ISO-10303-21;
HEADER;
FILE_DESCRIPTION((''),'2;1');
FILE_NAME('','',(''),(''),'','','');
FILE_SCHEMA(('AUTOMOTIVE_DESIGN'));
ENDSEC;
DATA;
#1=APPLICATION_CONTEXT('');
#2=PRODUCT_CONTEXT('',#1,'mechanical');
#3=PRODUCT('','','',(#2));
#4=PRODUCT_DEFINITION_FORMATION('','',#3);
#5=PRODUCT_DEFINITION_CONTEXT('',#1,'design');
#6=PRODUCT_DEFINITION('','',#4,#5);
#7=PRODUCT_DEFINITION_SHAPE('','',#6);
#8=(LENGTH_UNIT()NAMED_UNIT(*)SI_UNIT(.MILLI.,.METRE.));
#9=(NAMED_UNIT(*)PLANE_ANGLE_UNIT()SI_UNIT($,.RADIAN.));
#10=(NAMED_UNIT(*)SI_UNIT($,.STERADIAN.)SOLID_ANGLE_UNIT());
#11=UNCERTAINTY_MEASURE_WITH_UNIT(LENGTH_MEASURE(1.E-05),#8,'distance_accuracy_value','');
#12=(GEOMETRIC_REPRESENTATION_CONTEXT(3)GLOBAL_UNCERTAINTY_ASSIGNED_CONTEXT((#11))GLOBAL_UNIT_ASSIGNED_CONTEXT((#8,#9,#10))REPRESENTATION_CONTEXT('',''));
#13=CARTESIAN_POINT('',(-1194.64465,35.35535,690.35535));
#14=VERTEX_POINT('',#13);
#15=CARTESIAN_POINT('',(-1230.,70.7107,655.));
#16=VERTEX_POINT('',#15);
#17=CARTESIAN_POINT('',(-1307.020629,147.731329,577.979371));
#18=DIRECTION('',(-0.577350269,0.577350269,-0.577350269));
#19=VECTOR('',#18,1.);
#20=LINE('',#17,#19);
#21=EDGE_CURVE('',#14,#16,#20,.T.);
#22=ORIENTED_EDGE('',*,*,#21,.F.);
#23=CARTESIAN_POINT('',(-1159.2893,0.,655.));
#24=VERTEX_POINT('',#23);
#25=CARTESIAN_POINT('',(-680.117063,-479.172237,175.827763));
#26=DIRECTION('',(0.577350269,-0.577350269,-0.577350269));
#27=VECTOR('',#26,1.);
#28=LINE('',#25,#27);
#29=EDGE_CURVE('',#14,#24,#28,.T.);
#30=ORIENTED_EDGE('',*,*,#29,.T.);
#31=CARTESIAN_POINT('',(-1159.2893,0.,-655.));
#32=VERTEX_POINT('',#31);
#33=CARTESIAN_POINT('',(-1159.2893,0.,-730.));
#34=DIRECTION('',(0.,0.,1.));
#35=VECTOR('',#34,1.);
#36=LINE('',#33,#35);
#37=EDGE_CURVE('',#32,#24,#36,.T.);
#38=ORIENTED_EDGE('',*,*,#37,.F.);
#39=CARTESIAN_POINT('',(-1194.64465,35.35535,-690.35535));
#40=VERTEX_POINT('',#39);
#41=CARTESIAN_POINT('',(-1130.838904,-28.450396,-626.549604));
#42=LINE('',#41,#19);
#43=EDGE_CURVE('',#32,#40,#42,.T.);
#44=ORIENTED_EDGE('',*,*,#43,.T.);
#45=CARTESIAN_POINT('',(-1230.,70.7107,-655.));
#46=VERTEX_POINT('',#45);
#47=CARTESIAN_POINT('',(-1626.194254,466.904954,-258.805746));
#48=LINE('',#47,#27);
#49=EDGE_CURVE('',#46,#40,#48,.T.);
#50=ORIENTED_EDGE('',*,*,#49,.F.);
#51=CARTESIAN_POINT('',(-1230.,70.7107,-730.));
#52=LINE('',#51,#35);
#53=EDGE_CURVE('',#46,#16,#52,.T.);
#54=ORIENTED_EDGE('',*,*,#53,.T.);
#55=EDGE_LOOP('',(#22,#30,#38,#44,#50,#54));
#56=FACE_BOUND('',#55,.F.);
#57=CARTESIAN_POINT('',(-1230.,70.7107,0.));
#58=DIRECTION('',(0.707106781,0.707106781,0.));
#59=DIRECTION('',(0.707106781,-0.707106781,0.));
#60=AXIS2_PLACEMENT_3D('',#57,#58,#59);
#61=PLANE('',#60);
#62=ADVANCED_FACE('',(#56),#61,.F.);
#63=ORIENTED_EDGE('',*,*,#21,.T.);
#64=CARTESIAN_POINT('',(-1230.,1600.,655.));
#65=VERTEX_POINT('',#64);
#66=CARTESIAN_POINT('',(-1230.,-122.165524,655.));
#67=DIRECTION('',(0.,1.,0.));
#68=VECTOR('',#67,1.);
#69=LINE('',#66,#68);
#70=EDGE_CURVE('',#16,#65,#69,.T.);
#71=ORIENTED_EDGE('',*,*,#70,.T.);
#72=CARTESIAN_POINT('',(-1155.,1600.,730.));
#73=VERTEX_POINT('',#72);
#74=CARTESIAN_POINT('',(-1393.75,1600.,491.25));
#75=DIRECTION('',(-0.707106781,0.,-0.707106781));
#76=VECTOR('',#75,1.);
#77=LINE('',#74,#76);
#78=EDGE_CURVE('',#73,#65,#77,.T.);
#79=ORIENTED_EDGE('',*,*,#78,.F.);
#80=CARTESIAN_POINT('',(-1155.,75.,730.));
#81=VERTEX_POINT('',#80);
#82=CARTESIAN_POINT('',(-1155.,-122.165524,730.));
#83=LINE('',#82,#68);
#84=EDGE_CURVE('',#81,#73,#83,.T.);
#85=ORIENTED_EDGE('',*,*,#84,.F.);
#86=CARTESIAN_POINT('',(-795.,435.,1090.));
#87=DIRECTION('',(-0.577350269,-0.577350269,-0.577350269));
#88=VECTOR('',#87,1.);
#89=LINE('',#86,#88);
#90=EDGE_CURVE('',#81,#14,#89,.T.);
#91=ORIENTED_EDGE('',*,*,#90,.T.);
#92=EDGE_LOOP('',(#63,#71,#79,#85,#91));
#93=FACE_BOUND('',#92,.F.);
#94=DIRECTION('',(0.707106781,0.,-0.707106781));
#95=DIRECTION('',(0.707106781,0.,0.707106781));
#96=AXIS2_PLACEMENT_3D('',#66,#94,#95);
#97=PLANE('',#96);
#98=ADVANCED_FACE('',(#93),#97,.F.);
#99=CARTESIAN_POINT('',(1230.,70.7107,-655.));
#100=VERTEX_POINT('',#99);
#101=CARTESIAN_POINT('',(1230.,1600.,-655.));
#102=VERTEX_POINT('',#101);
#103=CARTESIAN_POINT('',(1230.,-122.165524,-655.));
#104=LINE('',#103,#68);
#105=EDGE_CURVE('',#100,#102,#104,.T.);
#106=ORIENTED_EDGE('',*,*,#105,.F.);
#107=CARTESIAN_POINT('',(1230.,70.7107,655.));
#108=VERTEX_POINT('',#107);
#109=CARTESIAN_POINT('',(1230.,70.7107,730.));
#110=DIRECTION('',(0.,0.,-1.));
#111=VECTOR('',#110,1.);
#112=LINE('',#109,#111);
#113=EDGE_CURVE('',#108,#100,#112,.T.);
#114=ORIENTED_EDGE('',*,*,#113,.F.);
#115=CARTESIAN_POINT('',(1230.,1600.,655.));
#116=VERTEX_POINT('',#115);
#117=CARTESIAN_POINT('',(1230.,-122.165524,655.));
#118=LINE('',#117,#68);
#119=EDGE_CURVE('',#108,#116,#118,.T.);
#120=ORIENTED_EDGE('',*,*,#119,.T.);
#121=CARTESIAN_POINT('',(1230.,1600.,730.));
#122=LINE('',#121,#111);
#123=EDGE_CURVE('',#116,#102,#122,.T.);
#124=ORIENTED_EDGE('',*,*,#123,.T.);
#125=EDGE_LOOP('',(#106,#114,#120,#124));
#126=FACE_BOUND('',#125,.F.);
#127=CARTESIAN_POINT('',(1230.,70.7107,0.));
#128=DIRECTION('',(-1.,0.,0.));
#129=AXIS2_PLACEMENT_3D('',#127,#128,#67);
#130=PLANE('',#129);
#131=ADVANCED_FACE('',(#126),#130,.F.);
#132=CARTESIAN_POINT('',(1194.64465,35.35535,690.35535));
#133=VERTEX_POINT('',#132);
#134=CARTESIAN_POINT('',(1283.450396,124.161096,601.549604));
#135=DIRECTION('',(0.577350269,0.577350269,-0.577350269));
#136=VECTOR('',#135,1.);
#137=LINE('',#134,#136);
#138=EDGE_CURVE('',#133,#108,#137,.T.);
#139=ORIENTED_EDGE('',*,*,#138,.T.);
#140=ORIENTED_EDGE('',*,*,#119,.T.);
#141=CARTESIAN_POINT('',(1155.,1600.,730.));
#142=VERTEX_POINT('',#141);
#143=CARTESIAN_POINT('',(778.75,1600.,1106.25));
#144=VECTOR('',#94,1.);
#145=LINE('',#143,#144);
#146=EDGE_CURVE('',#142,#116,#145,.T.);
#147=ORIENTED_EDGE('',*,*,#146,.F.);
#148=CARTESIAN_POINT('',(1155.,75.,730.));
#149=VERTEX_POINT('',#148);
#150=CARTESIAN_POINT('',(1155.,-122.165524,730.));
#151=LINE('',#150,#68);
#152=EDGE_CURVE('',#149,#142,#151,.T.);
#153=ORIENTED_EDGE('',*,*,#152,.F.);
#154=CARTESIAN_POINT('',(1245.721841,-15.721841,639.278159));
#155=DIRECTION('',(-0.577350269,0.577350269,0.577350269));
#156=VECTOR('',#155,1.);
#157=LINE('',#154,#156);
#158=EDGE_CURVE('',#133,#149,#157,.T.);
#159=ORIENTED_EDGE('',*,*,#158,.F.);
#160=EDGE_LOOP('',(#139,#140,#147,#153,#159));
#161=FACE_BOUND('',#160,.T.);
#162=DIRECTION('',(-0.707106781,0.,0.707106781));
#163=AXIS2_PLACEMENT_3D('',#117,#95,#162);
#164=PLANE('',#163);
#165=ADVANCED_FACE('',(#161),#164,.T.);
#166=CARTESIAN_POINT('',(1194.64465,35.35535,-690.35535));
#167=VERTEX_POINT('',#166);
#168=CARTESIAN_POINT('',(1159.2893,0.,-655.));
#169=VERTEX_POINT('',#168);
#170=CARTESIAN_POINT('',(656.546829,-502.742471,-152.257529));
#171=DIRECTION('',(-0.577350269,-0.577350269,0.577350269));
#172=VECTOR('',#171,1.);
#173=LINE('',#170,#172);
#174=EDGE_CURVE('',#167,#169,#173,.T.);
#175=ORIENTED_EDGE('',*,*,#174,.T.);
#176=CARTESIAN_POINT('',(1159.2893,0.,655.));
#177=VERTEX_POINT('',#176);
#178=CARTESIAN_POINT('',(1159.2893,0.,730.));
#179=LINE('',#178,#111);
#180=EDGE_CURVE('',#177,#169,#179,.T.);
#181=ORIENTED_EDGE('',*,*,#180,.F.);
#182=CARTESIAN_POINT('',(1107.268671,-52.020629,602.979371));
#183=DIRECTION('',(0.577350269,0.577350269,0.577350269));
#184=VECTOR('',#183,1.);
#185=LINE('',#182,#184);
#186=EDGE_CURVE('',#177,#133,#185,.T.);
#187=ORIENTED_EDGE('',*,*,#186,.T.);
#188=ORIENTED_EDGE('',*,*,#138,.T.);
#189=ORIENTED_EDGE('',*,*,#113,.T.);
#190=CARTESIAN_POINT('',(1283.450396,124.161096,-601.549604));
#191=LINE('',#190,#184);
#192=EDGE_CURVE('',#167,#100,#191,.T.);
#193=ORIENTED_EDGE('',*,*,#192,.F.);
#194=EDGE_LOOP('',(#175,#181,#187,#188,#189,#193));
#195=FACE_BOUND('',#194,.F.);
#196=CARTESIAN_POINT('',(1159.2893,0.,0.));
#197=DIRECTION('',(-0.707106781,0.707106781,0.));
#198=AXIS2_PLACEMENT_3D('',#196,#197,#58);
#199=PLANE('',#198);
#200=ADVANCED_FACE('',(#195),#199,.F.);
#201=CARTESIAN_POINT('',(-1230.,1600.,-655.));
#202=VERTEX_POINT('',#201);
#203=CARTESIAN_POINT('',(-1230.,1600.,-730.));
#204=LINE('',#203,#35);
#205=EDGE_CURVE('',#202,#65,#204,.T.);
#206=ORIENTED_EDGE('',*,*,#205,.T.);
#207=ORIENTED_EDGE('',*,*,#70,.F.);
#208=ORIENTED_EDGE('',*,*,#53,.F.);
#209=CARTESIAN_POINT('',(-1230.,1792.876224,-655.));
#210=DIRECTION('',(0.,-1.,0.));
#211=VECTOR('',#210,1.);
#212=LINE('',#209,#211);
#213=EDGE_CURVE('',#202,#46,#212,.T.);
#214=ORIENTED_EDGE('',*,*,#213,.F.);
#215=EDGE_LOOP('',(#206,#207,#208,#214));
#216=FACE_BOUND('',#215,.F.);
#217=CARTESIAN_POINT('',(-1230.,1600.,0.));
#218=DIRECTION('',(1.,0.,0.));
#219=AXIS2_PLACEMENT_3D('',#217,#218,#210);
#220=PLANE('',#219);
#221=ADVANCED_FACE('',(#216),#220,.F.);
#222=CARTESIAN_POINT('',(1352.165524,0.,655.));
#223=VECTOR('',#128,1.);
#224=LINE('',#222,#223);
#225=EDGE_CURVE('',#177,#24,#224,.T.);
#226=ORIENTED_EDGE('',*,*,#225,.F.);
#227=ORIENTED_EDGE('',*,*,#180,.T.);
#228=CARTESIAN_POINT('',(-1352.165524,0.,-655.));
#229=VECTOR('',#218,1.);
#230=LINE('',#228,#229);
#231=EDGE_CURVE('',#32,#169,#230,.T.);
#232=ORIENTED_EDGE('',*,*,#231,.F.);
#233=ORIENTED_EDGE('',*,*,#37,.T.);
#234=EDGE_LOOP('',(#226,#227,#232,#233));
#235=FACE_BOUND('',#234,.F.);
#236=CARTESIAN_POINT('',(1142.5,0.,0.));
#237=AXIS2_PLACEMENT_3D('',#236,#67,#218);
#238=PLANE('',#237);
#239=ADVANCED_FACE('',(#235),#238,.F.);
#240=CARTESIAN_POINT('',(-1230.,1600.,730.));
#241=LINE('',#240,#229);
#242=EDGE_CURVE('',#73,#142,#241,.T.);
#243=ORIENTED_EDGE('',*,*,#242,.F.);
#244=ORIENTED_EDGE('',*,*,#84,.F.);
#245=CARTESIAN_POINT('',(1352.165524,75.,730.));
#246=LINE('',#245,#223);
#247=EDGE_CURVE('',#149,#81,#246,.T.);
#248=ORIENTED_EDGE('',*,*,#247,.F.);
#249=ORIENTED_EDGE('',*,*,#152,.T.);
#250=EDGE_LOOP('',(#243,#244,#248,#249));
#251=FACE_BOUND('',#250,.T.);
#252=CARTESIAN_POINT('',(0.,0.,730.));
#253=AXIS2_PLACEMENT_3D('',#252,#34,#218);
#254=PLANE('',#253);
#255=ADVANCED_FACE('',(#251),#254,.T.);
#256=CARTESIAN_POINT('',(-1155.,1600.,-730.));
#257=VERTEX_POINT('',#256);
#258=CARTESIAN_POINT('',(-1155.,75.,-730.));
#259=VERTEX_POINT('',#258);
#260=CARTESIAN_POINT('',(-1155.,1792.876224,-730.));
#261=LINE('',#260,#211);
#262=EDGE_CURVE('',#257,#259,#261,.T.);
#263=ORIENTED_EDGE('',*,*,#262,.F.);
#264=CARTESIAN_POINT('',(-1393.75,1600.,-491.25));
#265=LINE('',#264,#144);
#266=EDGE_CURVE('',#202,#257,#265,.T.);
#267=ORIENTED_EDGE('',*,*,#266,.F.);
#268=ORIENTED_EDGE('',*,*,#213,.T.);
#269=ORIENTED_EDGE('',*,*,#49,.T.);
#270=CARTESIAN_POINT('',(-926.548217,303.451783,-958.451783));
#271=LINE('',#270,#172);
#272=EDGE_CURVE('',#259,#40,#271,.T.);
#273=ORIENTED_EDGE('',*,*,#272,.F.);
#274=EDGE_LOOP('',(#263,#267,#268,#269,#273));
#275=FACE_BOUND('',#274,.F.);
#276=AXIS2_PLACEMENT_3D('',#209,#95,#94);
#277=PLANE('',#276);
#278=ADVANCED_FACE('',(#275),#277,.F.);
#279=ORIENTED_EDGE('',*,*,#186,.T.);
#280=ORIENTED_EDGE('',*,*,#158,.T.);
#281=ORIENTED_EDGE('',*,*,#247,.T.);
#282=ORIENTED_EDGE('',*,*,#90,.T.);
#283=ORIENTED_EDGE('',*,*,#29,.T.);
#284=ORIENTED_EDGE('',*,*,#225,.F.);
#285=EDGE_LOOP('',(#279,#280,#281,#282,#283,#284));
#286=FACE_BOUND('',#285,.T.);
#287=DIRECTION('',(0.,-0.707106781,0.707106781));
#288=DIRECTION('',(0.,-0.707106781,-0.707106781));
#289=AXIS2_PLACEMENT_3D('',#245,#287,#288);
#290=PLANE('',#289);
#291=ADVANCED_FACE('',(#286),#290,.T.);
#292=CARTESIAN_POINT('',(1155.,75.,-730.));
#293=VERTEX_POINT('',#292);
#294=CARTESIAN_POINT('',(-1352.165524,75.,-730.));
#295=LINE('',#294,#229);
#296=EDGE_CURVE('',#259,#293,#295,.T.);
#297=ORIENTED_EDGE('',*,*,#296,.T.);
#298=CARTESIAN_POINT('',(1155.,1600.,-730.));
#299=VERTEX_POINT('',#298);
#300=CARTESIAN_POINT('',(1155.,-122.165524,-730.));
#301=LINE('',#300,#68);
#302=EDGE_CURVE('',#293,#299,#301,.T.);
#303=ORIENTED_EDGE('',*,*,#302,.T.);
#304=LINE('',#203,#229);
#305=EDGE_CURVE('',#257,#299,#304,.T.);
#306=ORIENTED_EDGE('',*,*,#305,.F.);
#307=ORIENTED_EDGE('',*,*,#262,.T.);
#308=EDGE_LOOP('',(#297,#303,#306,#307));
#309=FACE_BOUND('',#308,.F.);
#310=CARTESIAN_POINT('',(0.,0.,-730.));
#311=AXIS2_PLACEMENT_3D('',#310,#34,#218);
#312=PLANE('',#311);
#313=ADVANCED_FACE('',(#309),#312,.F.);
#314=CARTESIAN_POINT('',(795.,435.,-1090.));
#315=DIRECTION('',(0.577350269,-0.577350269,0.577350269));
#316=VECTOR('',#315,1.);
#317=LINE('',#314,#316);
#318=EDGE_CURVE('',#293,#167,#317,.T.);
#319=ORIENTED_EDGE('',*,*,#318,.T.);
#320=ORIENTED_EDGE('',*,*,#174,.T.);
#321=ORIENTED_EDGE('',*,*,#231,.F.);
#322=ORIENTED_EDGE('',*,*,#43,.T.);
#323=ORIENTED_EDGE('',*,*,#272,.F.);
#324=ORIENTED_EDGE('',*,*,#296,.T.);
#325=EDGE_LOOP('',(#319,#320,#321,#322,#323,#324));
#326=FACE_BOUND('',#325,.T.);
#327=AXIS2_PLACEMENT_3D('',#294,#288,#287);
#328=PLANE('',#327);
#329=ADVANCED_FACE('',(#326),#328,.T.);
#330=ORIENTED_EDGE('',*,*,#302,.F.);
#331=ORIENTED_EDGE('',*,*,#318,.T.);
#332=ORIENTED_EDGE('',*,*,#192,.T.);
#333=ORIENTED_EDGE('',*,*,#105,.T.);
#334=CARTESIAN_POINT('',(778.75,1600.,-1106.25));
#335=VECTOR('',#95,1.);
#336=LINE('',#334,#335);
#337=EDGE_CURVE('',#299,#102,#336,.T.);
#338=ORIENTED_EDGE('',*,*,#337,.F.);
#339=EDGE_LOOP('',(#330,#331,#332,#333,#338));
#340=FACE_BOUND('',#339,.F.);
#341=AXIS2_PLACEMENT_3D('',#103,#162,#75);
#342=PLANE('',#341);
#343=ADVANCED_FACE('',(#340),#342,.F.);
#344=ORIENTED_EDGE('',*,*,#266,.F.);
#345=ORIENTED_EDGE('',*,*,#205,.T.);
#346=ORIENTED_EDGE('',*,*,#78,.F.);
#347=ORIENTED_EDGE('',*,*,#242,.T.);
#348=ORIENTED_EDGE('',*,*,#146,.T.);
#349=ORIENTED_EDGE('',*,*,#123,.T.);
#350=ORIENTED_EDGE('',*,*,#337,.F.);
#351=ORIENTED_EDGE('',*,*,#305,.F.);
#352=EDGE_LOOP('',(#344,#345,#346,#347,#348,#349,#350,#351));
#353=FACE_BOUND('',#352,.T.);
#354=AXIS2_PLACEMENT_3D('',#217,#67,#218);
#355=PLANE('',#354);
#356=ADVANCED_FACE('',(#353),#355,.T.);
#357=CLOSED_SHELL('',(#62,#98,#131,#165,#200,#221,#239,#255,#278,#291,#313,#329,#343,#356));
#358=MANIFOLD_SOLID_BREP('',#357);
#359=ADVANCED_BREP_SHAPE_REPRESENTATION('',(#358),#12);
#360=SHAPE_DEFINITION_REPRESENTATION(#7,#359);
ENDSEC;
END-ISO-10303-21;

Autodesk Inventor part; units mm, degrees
ref_plane "YZ Plane" through (0, 0, 0) normal (1, 0, 0) x (0, 1, 0)
ref_plane "XZ Plane" through (0, 0, 0) normal (0, 1, 0) x (-1, 0, 0)
ref_plane "XY Plane" through (0, 0, 0) normal (0, 0, 1) x (1, 0, 0)
sketch "Sketch18" plane through (0, 0, 0) normal (0, 0, 1) x (1, 0, 0)
  circle A0 centre (0, 1100) radius 213
  line L0 (0, 0) -> (0, 1100) construction
  line L1 (0, 1100) -> (0, 1600) construction
  line L2 (0, 1100) -> (-158.3548, 850) construction
  line L3 (-158.3548, 850) -> (-454.2876, 850) construction
  line L4 (-454.2876, 850) -> (-612.6424, 1100) construction
  line L5 (-612.6424, 1100) -> (0, 1100) construction
  line L6 (-1230, 1600) -> (1230, 1600)
  line L7 (1541.1151, -621.787) -> (-1872.5331, -621.787) construction
  line L8 (-1230, 1600) -> (-1230, 265.165)
  line L9 (-1230, 265.165) -> (-964.835, 0)
  line L10 (-964.835, 0) -> (1159.2893, 0)
  line L11 (1159.2893, 0) -> (1230, 70.7107)
  line L12 (1230, 70.7107) -> (1230, 1600)
  line L13 (-1468.3883, 141.4214) -> (-1468.3883, -183.5786)
  line L14 (-1468.3883, 198.9214) -> (-1496.3883, 198.9214)
  line L15 (-1496.3883, 198.9214) -> (-1496.3883, -241.0786)
  line L16 (-1496.3883, -241.0786) -> (-1468.3883, -241.0786)
  line L17 (-1468.3883, -241.0786) -> (-1468.3883, 198.9214)
  line L18 (-1097.4175, 132.5825) -> (-1251.0786, -21.0786) construction
  line L19 (-1251.0786, -21.0786) -> (-1468.3883, -21.0786) construction
  line L20 (-1468.3883, 141.4214) -> (-1318.3883, 141.4214)
  line L21 (-1318.3883, 141.4214) -> (-1212.3223, 247.4874)
  line L22 (-1468.3883, -183.5786) -> (-1183.7689, -183.5786)
  line L23 (-1183.7689, -183.5786) -> (-982.5126, 17.6777)
  line L24 (-1318.3883, 141.4214) -> (-1183.7689, -183.5786)
  line L25 (1313.2107, -113.2107) -> (1341.2107, -113.2107)
  line L26 (1341.2107, -113.2107) -> (1341.2107, -553.2107)
  line L27 (1341.2107, -553.2107) -> (1313.2107, -553.2107)
  line L28 (1313.2107, -553.2107) -> (1313.2107, -113.2107)
  line L29 (980, 0) -> (980, -135.3553) construction
  line L30 (980, -135.3553) -> (1177.8553, -333.2107) construction
  line L31 (1177.8553, -333.2107) -> (1313.2107, -333.2107) construction
  line L32 (1313.2107, -170.7107) -> (1213.2107, -170.7107)
  line L33 (1213.2107, -170.7107) -> (1142.5, -100)
  line L34 (1142.5, -100) -> (1142.5, 0)
  line L35 (1313.2107, -495.7107) -> (1142.5, -495.7107)
  line L36 (1142.5, -495.7107) -> (817.5, -170.7107)
  line L37 (817.5, -170.7107) -> (817.5, 0)
  line L38 (1142.5, -100) -> (817.5, -170.7107)
  line L39 (1213.2107, -170.7107) -> (1142.5, -495.7107)
  line L40 (1177.8553, -135.3553) -> (980, -333.2107) construction
  line L41 (1142.5, -50) -> (817.5, -50) construction
  line L42 (-764.544, 0) -> (-593.6658, 0)
  line L43 (28, 0) -> (23.8247, 0)
  line L44 (28, -50) -> (28, 0)
  line L45 (28, -50) -> (-28, -50)
  line L46 (-28, -50) -> (-28, -22)
  line L47 (-28, -22) -> (0, -22)
  line L48 (0, -22) -> (0, 0)
  line L49 (0, -22) -> (28, -22) construction
  line L50 (-33.8617, -50) -> (33.8617, -50)
  line L51 (33.8617, -50) -> (33.8617, -60)
  line L52 (33.8617, -60) -> (-33.8617, -60)
  line L53 (-33.8617, -60) -> (-33.8617, -50)
  line L54 (-37.5, -60) -> (37.5, -60)
  line L55 (37.5, -60) -> (37.5, -200)
  line L56 (37.5, -200) -> (-37.5, -200)
  line L57 (-37.5, -200) -> (-37.5, -60)
  line L58 (378, 0) -> (373.8247, 0)
  line L59 (350, -22) -> (350, 0)
  line L60 (322, -22) -> (350, -22)
  line L61 (350, -22) -> (378, -22) construction
  line L62 (322, -50) -> (322, -22)
  line L63 (378, -50) -> (378, 0)
  line L64 (378, -50) -> (322, -50)
  line L65 (387.5, -60) -> (387.5, -200)
  line L66 (383.8617, -50) -> (383.8617, -60)
  line L67 (312.5, -200) -> (312.5, -60)
  line L68 (387.5, -200) -> (312.5, -200)
  line L69 (316.1383, -50) -> (383.8617, -50)
  line L70 (383.8617, -60) -> (316.1383, -60)
  line L71 (312.5, -60) -> (387.5, -60)
  line L72 (316.1383, -60) -> (316.1383, -50)
  line L73 (-322, 0) -> (-326.1753, 0)
  line L74 (-350, -22) -> (-350, 0)
  line L75 (-378, -22) -> (-350, -22)
  line L76 (-350, -22) -> (-322, -22) construction
  line L77 (-378, -50) -> (-378, -22)
  line L78 (-322, -50) -> (-322, 0)
  line L79 (-322, -50) -> (-378, -50)
  line L80 (-312.5, -60) -> (-312.5, -200)
  line L81 (-316.1383, -50) -> (-316.1383, -60)
  line L82 (-387.5, -200) -> (-387.5, -60)
  line L83 (-312.5, -200) -> (-387.5, -200)
  line L84 (-383.8617, -50) -> (-316.1383, -50)
  line L85 (-316.1383, -60) -> (-383.8617, -60)
  line L86 (-387.5, -60) -> (-312.5, -60)
  line L87 (-383.8617, -60) -> (-383.8617, -50)
  line L88 (728, 0) -> (723.8247, 0)
  line L89 (700, -22) -> (700, 0)
  line L90 (672, -22) -> (700, -22)
  line L91 (700, -22) -> (728, -22) construction
  line L92 (672, -50) -> (672, -22)
  line L93 (728, -50) -> (728, 0)
  line L94 (728, -50) -> (672, -50)
  line L95 (737.5, -60) -> (737.5, -200)
  line L96 (733.8617, -50) -> (733.8617, -60)
  line L97 (662.5, -200) -> (662.5, -60)
  line L98 (737.5, -200) -> (662.5, -200)
  line L99 (666.1383, -50) -> (733.8617, -50)
  line L100 (733.8617, -60) -> (666.1383, -60)
  line L101 (662.5, -60) -> (737.5, -60)
  line L102 (666.1383, -60) -> (666.1383, -50)
  line L103 (-672, 0) -> (-676.1753, 0)
  line L104 (-700, -22) -> (-700, 0)
  line L105 (-728, -22) -> (-700, -22)
  line L106 (-700, -22) -> (-672, -22) construction
  line L107 (-728, -50) -> (-728, -22)
  line L108 (-672, -50) -> (-672, 0)
  line L109 (-672, -50) -> (-728, -50)
  line L110 (-662.5, -60) -> (-662.5, -200)
  line L111 (-666.1383, -50) -> (-666.1383, -60)
  line L112 (-737.5, -200) -> (-737.5, -60)
  line L113 (-662.5, -200) -> (-737.5, -200)
  line L114 (-733.8617, -50) -> (-666.1383, -50)
  line L115 (-666.1383, -60) -> (-733.8617, -60)
  line L116 (-737.5, -60) -> (-662.5, -60)
  line L117 (-733.8617, -60) -> (-733.8617, -50)
  line L118 (-1230, 265.165) -> (-1230, 70.7107)
  line L119 (-1230, 70.7107) -> (-1159.2893, 0)
  line L120 (-1159.2893, 0) -> (-964.835, 0)
  line L121 (1980.1647, -124.622) -> (1655.1647, -124.622)
  line L122 (1655.1647, -124.622) -> (1655.1647, -361.6901)
  line L123 (2165.0175, -309.4748) -> (2165.0175, -634.4748)
  line L124 (1980.1647, -124.622) -> (1980.1647, -309.4748)
  line L125 (1980.1647, -309.4748) -> (2165.0175, -309.4748)
  line L126 (2022.5911, -267.0484) -> (1791.5571, -498.0824)
  line L127 (1980.1647, -224.622) -> (2065.0175, -309.4748)
  line L128 (1655.1647, -361.6901) -> (1927.9494, -634.4748)
  line L129 (1980.1647, -224.622) -> (1655.1647, -361.6901)
  line L130 (2065.0175, -309.4748) -> (1927.9494, -634.4748)
  line L131 (2165.0175, -634.4748) -> (1927.9494, -634.4748)
  point P0 (-306.3212, 850)
  point P1 (-306.3212, 1100)
  point P2 (0, -50)
  point P3 (0, -60)
  point P4 (350, 0)
  point P5 (350, -50)
  point P6 (350, -60)
  point P7 (-350, 0)
  point P8 (-350, -50)
  point P9 (-350, -60)
  point P10 (700, 0)
  point P11 (700, -50)
  point P12 (700, -60)
  point P13 (-700, 0)
  point P14 (-700, -50)
  point P15 (-700, -60)
  dimension "d112" = 426
  dimension "d113" = 1100
  dimension "d114" = 500
  dimension "d115" = 1100
  dimension "d116" = 250
  dimension "d120" = 2460
  dimension "d121" = 325
  dimension "d123" = 28
  dimension "d124" = 440
  dimension "d125" = 135
  dimension "d127" = 67.5
  dimension "d128" = 100
  dimension "d129" = 375
  dimension "d130" = 1600
  dimension "d131" = 150
  dimension "d132" = 250
  dimension "d133" = 100
  dimension "d135" = 50
  dimension "d136" = -28
  dimension "d137" = 10
  dimension "d138" = 140
  dimension "d139" = 75
  dimension "d142" = 350
  dimension "d157" = 217.3097
  dimension "d164" = 135.3553
  dimension "d165" = 279.8097
  dimension "d174" = 12.275
  dimension "d175" = 32.725
  dimension "d176" = 459.6194
  dimension "d177" = 279.8097
  dimension "d178" = 325
  dimension "d179" = 45
  dimension "d180" = 100
  dimension "d181" = 100
  dimension "d182" = 120
  dimension "d184" = 326.7315
  dimension "d185" = 22.867
  dimension "d186" = 22.133
extrude "Extrusion16" add sketch "Sketch18" along normal mid plane 1460 contours A0 | L6 L12 L11 L10 L9 L8 | L9 L21 L118 | L9 L23 L120 L119 L118 L21 | L9 L120 L23
sketch "Sketch19" plane through (-1230, 265.165, 700) normal (-1, 0, 0) x (0, 0, 1)
  circle A0 centre (-700, 834.835) radius 213
  line L0 (30, 1334.835) -> (30, -194.4544) construction
  line L1 (-1430, 1334.835) -> (30, 1334.835) construction
  line L2 (-1430, -194.4544) -> (-1430, 1334.835) construction
  line L3 (-1430, 1334.835) -> (30, 1334.835) projected
  line L4 (-1430, -194.4544) -> (30, -194.4544) projected
  point P0 (-700, -265.165)
  point P1 (-700, 1334.835)
  point P2 (-700, 1334.835)
  dimension "d149" = 500
  dimension "d150" = 426
extrude "Extrusion17" [suppressed]
sketch "Sketch20" plane through (0, 0, -730) normal (0, 0, -1) x (-1, 0, 0)
  circle A0 centre (0, 1100) radius 213
  line L0 (1230, 1600) -> (-1230, 1600) projected
  point P0 (0, 0)
  point P1 (0, 1600)
  point P2 (0, 1600)
  dimension "d153" = 500
  dimension "d154" = 426
extrude "Extrusion18" [suppressed]
sketch "Sketch23" plane through (0, 0, 0) normal (0, 0, 1) x (1, 0, 0)
  line L0 (1159.2893, 0) -> (1230, 70.7107) construction
  line L1 (1230, 70.7107) -> (1230, 1600) construction
  line L2 (1230, 1600) -> (-1230, 1600) construction
  line L3 (-1230, 1600) -> (-1230, 70.7107) construction
  line L4 (980, 0) -> (980, -135.3553)
  line L5 (980, -135.3553) -> (1177.8553, -333.2107)
  line L6 (1177.8553, -333.2107) -> (1313.2107, -333.2107)
  line L7 (-1159.2893, 0) -> (1159.2893, 0) projected
  line L8 (-1230, 70.7107) -> (-1159.2893, 0) projected
  point P0 (0, 0)
  dimension "d162" = 135
  dimension "d163" = 250
  dimension "d166" = 135.3553
  dimension "d167" = 279.8097
sketch "Sketch24" plane through (-1034.835, 0, 700) normal (0, -1, 0) x (1, 0, 0)
  circle A0 centre (2084.835, -700) radius 162.5
  point P0 (1034.835, -700)
  dimension "d168" = 325
sweep "Sweep4" [suppressed]
mirror "Mirror7" [suppressed]
mirror "Mirror8" [suppressed]
chamfer "Chamfer2" distance 75 angle 45 6 edges at (-1230, 835.3553, 730) (0, 0, 730) (1230, 835.3553, 730) (1230, 835.3553, -730) (0, 0, -730) (-1230, 835.3553, -730)
properties part number "GBK-RK-0005 RK dummy 5" material "Water"
